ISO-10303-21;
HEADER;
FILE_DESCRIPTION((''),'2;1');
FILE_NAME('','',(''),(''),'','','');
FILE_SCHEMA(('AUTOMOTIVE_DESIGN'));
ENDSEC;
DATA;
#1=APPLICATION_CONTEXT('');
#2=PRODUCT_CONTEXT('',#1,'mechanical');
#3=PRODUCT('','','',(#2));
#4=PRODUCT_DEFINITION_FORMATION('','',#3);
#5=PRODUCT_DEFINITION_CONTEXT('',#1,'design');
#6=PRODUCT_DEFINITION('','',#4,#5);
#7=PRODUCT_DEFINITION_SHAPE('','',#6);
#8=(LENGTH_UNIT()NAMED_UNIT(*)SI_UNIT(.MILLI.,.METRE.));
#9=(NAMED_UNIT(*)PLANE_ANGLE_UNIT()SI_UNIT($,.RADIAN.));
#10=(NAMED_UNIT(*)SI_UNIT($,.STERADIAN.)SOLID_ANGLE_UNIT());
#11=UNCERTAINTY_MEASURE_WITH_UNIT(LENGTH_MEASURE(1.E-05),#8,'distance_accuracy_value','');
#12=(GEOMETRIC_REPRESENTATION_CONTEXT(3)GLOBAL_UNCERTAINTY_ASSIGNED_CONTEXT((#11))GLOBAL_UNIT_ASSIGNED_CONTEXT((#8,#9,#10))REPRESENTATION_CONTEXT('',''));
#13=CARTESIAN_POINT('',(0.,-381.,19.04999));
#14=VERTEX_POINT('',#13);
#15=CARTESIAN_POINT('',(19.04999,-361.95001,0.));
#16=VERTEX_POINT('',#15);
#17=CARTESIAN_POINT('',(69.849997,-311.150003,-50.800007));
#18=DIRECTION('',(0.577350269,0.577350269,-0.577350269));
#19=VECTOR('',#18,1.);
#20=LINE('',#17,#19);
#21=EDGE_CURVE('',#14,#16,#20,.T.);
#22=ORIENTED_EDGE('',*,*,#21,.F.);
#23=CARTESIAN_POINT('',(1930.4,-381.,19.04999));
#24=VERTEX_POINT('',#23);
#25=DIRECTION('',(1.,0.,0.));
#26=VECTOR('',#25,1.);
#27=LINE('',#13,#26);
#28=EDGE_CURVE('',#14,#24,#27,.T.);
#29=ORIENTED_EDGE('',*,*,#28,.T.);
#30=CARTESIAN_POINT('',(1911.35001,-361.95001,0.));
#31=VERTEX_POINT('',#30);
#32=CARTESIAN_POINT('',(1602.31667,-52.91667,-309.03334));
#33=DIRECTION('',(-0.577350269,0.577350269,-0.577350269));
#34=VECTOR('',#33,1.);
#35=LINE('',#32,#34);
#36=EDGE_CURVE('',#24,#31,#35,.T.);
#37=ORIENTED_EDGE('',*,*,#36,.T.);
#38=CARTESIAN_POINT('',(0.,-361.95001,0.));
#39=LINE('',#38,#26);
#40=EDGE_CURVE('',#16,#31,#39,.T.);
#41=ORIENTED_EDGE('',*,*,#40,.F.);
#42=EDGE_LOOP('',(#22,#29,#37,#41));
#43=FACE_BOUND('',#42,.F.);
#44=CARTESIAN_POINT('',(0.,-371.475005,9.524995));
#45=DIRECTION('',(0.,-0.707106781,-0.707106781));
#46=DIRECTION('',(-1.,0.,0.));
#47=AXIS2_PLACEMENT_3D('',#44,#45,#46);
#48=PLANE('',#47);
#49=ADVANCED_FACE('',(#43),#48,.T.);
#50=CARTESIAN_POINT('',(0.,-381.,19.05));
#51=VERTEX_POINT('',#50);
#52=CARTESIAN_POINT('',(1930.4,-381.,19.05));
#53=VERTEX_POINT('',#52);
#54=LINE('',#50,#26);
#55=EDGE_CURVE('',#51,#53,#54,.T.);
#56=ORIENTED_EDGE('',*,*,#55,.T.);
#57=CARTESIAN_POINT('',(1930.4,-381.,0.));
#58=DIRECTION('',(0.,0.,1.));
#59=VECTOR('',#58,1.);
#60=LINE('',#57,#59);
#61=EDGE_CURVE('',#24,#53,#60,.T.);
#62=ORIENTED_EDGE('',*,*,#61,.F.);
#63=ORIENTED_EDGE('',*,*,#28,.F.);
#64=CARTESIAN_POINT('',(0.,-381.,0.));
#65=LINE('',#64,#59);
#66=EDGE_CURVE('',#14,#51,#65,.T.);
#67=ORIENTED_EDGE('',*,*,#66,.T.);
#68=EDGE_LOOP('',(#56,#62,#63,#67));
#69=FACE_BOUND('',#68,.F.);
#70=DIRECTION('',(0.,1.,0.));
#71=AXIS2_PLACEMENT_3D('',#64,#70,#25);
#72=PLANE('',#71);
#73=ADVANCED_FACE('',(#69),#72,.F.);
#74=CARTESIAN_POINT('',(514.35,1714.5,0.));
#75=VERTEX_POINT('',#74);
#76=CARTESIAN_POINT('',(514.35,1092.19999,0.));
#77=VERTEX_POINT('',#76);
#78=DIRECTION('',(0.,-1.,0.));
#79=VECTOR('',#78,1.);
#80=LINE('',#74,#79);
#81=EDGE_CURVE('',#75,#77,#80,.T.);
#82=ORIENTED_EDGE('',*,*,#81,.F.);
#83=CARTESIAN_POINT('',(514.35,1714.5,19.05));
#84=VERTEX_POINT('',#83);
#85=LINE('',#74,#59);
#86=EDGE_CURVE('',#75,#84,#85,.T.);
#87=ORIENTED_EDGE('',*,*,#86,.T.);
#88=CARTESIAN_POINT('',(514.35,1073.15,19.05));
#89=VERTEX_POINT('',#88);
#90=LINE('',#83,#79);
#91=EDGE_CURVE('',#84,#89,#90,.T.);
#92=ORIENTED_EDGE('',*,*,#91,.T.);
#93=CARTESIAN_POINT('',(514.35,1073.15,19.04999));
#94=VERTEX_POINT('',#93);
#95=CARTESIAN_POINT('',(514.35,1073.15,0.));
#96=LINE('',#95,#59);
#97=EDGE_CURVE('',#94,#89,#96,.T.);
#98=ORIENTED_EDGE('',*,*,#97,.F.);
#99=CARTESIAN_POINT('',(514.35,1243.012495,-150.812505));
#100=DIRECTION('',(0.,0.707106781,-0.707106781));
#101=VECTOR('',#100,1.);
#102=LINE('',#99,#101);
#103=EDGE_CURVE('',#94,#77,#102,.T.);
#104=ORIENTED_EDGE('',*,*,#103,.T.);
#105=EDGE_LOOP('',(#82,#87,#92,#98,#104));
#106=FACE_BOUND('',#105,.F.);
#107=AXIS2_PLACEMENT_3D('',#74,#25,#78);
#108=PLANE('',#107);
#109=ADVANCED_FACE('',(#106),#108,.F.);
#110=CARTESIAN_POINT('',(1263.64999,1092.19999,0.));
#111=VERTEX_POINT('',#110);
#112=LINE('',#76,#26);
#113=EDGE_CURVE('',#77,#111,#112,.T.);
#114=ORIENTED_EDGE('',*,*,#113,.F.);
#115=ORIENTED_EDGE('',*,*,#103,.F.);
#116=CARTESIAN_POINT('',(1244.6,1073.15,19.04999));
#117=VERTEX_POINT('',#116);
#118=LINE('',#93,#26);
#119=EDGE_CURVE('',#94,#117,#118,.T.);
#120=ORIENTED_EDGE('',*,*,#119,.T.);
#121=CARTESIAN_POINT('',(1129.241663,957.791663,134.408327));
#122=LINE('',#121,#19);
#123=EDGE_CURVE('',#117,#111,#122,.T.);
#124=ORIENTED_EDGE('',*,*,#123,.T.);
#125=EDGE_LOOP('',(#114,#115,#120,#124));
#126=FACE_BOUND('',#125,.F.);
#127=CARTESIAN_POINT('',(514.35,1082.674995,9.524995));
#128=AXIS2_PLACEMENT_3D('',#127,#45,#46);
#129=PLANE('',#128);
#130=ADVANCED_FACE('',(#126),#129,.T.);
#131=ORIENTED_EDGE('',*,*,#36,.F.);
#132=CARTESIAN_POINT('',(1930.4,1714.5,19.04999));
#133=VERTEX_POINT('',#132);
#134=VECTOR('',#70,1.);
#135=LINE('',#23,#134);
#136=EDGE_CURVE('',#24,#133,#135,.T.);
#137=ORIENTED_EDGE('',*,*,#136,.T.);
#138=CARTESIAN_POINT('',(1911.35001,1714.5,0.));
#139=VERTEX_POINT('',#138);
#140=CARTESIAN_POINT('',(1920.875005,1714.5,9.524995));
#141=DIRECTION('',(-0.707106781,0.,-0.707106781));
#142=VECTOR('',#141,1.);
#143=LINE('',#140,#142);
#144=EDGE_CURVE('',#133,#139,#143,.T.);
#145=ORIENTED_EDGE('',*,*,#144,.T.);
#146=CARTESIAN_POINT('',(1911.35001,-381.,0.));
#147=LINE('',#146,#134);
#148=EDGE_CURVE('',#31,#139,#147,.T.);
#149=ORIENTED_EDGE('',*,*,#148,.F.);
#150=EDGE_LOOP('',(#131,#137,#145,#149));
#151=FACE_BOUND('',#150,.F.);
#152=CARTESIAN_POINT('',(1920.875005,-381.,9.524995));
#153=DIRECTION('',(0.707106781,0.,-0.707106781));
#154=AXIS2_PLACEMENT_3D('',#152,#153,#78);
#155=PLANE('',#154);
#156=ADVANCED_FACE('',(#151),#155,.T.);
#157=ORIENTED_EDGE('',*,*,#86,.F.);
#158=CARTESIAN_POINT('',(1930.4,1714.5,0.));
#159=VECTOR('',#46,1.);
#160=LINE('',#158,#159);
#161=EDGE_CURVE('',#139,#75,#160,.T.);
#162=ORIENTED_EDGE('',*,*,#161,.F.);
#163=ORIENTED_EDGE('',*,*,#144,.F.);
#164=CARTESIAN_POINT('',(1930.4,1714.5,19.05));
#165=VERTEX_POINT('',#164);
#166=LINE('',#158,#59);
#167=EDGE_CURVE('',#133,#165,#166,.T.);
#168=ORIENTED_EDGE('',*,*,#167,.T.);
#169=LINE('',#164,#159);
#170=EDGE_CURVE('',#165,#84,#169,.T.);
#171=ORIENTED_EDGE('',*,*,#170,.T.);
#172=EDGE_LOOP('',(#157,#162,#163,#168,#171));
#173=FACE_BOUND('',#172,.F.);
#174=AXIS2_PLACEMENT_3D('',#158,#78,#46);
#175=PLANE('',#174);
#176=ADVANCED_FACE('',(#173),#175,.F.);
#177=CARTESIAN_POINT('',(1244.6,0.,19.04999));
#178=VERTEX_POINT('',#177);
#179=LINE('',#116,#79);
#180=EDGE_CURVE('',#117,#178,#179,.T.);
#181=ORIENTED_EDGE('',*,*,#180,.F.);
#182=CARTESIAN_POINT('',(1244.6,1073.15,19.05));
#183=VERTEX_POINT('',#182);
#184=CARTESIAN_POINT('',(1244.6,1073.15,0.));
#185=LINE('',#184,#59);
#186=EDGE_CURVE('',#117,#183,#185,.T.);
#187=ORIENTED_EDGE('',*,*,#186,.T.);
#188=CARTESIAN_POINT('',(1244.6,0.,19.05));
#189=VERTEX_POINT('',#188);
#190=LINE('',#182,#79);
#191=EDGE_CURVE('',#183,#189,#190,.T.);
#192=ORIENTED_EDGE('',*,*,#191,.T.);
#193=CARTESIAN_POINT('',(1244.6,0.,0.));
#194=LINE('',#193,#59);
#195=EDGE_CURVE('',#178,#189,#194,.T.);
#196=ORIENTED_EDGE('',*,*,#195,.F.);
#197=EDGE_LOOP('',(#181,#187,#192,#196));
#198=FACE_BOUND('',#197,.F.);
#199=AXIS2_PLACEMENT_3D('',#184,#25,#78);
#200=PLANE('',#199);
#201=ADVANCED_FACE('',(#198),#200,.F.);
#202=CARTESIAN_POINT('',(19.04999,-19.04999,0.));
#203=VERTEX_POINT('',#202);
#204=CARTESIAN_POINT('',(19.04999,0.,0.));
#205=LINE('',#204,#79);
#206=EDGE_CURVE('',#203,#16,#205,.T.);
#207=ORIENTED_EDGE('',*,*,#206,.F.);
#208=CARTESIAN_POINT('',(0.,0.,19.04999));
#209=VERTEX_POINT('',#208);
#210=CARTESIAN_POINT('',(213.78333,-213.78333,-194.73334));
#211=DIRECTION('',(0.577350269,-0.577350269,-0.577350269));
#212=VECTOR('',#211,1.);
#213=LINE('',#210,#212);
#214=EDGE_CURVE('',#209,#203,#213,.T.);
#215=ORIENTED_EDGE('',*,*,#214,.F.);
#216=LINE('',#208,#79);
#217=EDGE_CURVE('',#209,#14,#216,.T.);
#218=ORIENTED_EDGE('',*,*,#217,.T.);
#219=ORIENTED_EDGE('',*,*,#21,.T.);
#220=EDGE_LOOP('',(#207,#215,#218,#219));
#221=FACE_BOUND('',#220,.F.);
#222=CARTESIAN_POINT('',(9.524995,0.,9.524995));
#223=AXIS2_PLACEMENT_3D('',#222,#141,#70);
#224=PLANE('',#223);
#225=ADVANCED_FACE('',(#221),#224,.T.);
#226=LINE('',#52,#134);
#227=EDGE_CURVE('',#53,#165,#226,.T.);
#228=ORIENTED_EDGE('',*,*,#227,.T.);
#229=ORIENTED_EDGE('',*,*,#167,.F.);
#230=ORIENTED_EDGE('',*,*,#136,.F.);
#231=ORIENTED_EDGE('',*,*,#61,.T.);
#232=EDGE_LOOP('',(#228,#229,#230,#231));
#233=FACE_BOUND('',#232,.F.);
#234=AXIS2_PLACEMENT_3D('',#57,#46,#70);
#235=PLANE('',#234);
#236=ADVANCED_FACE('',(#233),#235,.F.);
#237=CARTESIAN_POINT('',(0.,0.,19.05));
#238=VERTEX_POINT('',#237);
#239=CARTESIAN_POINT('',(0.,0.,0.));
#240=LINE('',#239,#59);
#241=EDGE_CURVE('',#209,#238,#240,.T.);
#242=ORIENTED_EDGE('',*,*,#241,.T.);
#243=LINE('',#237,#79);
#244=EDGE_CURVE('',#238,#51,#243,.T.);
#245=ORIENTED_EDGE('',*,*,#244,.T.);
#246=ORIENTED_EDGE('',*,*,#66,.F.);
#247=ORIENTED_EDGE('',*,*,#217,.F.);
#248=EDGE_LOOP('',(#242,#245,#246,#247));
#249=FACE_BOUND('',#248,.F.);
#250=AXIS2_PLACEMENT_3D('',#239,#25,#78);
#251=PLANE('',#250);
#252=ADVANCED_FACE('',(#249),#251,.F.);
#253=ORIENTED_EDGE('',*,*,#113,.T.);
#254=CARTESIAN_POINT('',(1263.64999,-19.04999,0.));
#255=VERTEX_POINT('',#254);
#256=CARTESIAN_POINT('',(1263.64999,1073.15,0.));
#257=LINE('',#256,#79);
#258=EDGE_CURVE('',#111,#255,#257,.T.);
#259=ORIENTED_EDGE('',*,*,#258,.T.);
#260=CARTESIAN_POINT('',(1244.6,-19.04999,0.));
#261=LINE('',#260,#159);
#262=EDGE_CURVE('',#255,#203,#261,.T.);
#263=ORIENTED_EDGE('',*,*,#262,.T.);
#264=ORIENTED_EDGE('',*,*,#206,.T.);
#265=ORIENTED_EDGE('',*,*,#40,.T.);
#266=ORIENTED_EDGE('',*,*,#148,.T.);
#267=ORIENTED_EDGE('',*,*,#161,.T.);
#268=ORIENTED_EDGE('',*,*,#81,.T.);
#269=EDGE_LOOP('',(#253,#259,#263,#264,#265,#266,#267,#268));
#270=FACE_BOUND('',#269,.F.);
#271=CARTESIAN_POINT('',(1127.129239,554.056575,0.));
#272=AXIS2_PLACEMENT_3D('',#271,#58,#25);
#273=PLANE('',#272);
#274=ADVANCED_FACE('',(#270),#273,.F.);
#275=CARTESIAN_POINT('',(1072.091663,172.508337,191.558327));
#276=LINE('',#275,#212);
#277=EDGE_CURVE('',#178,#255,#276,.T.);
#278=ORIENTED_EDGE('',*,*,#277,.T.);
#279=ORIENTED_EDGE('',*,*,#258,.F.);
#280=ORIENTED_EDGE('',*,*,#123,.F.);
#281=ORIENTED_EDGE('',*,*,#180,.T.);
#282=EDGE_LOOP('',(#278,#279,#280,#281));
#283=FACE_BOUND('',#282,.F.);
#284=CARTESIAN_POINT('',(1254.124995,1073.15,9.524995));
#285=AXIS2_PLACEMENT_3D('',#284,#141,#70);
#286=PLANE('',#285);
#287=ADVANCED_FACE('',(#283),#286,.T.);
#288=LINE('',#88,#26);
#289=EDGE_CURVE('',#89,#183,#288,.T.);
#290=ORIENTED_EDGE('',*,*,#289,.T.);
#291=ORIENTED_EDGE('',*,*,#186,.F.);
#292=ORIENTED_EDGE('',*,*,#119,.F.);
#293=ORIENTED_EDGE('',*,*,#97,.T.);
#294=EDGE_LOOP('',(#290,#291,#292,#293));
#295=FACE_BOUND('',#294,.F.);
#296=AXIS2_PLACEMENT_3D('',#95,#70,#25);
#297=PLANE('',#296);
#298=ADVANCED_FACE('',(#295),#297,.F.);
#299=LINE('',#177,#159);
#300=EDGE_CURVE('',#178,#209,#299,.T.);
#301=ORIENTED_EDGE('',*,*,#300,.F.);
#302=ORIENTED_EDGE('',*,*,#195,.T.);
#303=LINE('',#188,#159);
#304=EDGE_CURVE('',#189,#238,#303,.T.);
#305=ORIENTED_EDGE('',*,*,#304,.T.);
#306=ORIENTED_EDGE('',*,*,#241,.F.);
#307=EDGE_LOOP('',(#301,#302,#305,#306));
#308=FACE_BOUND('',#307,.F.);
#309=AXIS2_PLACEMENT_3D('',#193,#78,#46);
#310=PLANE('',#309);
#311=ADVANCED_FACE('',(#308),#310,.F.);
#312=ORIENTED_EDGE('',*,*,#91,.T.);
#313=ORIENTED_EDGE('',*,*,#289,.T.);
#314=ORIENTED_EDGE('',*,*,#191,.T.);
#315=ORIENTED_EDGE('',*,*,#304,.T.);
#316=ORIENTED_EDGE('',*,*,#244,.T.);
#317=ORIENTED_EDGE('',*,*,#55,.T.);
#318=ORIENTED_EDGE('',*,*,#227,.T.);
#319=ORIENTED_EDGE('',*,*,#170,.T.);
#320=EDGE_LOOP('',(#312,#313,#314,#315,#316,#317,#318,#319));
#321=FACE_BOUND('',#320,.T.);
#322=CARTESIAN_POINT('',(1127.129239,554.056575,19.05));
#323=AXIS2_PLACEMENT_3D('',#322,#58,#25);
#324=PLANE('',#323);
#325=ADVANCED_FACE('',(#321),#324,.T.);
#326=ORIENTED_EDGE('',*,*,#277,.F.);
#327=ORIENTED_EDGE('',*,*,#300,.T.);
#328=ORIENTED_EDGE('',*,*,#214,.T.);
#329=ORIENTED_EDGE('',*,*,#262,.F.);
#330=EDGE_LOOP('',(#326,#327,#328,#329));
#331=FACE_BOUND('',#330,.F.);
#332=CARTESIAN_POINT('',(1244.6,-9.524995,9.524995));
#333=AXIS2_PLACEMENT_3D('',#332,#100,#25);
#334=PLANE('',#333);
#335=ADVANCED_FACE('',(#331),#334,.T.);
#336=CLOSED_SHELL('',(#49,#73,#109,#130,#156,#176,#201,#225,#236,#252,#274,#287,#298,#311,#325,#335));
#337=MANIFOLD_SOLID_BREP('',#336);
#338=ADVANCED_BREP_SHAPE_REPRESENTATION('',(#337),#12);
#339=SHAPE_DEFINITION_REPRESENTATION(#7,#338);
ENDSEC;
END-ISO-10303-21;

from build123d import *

# Parameters (mm, degrees)
F1_DEPTH = 19.05
F2_SIZE  = 19.04999


# Not quite as in the source:
# - a fillet or chamfer is up to 0.001 mm smaller than in the source, because OpenCascade refuses the exact size


with BuildPart() as f1:
    # F0 (on Top) → F1 (new body)
    with BuildSketch(Plane.XY):
        Polygon((1244.6, 0), (0, 0), (0, -381), (1930.4, -381), (1930.4, 1714.5), (514.35, 1714.5), (514.35, 1073.15), (1244.6, 1073.15), align=None)
    extrude(amount=F1_DEPTH)

    # F2 (size 19.05 in the source; OpenCascade refuses exactly that, so slightly less here)
    f2_edges = [f1.edges().sort_by_distance(p)[0] for p in [
        (965.2, -381, 0),
        (1930.4, 666.75, 0),
        (879.475, 1073.15, 0),
        (1244.6, 536.575, 0),
        (622.3, 0, 0),
        (0, -190.5, 0),
    ]]
    chamfer(f2_edges, length=F2_SIZE)


solid = f1.part
